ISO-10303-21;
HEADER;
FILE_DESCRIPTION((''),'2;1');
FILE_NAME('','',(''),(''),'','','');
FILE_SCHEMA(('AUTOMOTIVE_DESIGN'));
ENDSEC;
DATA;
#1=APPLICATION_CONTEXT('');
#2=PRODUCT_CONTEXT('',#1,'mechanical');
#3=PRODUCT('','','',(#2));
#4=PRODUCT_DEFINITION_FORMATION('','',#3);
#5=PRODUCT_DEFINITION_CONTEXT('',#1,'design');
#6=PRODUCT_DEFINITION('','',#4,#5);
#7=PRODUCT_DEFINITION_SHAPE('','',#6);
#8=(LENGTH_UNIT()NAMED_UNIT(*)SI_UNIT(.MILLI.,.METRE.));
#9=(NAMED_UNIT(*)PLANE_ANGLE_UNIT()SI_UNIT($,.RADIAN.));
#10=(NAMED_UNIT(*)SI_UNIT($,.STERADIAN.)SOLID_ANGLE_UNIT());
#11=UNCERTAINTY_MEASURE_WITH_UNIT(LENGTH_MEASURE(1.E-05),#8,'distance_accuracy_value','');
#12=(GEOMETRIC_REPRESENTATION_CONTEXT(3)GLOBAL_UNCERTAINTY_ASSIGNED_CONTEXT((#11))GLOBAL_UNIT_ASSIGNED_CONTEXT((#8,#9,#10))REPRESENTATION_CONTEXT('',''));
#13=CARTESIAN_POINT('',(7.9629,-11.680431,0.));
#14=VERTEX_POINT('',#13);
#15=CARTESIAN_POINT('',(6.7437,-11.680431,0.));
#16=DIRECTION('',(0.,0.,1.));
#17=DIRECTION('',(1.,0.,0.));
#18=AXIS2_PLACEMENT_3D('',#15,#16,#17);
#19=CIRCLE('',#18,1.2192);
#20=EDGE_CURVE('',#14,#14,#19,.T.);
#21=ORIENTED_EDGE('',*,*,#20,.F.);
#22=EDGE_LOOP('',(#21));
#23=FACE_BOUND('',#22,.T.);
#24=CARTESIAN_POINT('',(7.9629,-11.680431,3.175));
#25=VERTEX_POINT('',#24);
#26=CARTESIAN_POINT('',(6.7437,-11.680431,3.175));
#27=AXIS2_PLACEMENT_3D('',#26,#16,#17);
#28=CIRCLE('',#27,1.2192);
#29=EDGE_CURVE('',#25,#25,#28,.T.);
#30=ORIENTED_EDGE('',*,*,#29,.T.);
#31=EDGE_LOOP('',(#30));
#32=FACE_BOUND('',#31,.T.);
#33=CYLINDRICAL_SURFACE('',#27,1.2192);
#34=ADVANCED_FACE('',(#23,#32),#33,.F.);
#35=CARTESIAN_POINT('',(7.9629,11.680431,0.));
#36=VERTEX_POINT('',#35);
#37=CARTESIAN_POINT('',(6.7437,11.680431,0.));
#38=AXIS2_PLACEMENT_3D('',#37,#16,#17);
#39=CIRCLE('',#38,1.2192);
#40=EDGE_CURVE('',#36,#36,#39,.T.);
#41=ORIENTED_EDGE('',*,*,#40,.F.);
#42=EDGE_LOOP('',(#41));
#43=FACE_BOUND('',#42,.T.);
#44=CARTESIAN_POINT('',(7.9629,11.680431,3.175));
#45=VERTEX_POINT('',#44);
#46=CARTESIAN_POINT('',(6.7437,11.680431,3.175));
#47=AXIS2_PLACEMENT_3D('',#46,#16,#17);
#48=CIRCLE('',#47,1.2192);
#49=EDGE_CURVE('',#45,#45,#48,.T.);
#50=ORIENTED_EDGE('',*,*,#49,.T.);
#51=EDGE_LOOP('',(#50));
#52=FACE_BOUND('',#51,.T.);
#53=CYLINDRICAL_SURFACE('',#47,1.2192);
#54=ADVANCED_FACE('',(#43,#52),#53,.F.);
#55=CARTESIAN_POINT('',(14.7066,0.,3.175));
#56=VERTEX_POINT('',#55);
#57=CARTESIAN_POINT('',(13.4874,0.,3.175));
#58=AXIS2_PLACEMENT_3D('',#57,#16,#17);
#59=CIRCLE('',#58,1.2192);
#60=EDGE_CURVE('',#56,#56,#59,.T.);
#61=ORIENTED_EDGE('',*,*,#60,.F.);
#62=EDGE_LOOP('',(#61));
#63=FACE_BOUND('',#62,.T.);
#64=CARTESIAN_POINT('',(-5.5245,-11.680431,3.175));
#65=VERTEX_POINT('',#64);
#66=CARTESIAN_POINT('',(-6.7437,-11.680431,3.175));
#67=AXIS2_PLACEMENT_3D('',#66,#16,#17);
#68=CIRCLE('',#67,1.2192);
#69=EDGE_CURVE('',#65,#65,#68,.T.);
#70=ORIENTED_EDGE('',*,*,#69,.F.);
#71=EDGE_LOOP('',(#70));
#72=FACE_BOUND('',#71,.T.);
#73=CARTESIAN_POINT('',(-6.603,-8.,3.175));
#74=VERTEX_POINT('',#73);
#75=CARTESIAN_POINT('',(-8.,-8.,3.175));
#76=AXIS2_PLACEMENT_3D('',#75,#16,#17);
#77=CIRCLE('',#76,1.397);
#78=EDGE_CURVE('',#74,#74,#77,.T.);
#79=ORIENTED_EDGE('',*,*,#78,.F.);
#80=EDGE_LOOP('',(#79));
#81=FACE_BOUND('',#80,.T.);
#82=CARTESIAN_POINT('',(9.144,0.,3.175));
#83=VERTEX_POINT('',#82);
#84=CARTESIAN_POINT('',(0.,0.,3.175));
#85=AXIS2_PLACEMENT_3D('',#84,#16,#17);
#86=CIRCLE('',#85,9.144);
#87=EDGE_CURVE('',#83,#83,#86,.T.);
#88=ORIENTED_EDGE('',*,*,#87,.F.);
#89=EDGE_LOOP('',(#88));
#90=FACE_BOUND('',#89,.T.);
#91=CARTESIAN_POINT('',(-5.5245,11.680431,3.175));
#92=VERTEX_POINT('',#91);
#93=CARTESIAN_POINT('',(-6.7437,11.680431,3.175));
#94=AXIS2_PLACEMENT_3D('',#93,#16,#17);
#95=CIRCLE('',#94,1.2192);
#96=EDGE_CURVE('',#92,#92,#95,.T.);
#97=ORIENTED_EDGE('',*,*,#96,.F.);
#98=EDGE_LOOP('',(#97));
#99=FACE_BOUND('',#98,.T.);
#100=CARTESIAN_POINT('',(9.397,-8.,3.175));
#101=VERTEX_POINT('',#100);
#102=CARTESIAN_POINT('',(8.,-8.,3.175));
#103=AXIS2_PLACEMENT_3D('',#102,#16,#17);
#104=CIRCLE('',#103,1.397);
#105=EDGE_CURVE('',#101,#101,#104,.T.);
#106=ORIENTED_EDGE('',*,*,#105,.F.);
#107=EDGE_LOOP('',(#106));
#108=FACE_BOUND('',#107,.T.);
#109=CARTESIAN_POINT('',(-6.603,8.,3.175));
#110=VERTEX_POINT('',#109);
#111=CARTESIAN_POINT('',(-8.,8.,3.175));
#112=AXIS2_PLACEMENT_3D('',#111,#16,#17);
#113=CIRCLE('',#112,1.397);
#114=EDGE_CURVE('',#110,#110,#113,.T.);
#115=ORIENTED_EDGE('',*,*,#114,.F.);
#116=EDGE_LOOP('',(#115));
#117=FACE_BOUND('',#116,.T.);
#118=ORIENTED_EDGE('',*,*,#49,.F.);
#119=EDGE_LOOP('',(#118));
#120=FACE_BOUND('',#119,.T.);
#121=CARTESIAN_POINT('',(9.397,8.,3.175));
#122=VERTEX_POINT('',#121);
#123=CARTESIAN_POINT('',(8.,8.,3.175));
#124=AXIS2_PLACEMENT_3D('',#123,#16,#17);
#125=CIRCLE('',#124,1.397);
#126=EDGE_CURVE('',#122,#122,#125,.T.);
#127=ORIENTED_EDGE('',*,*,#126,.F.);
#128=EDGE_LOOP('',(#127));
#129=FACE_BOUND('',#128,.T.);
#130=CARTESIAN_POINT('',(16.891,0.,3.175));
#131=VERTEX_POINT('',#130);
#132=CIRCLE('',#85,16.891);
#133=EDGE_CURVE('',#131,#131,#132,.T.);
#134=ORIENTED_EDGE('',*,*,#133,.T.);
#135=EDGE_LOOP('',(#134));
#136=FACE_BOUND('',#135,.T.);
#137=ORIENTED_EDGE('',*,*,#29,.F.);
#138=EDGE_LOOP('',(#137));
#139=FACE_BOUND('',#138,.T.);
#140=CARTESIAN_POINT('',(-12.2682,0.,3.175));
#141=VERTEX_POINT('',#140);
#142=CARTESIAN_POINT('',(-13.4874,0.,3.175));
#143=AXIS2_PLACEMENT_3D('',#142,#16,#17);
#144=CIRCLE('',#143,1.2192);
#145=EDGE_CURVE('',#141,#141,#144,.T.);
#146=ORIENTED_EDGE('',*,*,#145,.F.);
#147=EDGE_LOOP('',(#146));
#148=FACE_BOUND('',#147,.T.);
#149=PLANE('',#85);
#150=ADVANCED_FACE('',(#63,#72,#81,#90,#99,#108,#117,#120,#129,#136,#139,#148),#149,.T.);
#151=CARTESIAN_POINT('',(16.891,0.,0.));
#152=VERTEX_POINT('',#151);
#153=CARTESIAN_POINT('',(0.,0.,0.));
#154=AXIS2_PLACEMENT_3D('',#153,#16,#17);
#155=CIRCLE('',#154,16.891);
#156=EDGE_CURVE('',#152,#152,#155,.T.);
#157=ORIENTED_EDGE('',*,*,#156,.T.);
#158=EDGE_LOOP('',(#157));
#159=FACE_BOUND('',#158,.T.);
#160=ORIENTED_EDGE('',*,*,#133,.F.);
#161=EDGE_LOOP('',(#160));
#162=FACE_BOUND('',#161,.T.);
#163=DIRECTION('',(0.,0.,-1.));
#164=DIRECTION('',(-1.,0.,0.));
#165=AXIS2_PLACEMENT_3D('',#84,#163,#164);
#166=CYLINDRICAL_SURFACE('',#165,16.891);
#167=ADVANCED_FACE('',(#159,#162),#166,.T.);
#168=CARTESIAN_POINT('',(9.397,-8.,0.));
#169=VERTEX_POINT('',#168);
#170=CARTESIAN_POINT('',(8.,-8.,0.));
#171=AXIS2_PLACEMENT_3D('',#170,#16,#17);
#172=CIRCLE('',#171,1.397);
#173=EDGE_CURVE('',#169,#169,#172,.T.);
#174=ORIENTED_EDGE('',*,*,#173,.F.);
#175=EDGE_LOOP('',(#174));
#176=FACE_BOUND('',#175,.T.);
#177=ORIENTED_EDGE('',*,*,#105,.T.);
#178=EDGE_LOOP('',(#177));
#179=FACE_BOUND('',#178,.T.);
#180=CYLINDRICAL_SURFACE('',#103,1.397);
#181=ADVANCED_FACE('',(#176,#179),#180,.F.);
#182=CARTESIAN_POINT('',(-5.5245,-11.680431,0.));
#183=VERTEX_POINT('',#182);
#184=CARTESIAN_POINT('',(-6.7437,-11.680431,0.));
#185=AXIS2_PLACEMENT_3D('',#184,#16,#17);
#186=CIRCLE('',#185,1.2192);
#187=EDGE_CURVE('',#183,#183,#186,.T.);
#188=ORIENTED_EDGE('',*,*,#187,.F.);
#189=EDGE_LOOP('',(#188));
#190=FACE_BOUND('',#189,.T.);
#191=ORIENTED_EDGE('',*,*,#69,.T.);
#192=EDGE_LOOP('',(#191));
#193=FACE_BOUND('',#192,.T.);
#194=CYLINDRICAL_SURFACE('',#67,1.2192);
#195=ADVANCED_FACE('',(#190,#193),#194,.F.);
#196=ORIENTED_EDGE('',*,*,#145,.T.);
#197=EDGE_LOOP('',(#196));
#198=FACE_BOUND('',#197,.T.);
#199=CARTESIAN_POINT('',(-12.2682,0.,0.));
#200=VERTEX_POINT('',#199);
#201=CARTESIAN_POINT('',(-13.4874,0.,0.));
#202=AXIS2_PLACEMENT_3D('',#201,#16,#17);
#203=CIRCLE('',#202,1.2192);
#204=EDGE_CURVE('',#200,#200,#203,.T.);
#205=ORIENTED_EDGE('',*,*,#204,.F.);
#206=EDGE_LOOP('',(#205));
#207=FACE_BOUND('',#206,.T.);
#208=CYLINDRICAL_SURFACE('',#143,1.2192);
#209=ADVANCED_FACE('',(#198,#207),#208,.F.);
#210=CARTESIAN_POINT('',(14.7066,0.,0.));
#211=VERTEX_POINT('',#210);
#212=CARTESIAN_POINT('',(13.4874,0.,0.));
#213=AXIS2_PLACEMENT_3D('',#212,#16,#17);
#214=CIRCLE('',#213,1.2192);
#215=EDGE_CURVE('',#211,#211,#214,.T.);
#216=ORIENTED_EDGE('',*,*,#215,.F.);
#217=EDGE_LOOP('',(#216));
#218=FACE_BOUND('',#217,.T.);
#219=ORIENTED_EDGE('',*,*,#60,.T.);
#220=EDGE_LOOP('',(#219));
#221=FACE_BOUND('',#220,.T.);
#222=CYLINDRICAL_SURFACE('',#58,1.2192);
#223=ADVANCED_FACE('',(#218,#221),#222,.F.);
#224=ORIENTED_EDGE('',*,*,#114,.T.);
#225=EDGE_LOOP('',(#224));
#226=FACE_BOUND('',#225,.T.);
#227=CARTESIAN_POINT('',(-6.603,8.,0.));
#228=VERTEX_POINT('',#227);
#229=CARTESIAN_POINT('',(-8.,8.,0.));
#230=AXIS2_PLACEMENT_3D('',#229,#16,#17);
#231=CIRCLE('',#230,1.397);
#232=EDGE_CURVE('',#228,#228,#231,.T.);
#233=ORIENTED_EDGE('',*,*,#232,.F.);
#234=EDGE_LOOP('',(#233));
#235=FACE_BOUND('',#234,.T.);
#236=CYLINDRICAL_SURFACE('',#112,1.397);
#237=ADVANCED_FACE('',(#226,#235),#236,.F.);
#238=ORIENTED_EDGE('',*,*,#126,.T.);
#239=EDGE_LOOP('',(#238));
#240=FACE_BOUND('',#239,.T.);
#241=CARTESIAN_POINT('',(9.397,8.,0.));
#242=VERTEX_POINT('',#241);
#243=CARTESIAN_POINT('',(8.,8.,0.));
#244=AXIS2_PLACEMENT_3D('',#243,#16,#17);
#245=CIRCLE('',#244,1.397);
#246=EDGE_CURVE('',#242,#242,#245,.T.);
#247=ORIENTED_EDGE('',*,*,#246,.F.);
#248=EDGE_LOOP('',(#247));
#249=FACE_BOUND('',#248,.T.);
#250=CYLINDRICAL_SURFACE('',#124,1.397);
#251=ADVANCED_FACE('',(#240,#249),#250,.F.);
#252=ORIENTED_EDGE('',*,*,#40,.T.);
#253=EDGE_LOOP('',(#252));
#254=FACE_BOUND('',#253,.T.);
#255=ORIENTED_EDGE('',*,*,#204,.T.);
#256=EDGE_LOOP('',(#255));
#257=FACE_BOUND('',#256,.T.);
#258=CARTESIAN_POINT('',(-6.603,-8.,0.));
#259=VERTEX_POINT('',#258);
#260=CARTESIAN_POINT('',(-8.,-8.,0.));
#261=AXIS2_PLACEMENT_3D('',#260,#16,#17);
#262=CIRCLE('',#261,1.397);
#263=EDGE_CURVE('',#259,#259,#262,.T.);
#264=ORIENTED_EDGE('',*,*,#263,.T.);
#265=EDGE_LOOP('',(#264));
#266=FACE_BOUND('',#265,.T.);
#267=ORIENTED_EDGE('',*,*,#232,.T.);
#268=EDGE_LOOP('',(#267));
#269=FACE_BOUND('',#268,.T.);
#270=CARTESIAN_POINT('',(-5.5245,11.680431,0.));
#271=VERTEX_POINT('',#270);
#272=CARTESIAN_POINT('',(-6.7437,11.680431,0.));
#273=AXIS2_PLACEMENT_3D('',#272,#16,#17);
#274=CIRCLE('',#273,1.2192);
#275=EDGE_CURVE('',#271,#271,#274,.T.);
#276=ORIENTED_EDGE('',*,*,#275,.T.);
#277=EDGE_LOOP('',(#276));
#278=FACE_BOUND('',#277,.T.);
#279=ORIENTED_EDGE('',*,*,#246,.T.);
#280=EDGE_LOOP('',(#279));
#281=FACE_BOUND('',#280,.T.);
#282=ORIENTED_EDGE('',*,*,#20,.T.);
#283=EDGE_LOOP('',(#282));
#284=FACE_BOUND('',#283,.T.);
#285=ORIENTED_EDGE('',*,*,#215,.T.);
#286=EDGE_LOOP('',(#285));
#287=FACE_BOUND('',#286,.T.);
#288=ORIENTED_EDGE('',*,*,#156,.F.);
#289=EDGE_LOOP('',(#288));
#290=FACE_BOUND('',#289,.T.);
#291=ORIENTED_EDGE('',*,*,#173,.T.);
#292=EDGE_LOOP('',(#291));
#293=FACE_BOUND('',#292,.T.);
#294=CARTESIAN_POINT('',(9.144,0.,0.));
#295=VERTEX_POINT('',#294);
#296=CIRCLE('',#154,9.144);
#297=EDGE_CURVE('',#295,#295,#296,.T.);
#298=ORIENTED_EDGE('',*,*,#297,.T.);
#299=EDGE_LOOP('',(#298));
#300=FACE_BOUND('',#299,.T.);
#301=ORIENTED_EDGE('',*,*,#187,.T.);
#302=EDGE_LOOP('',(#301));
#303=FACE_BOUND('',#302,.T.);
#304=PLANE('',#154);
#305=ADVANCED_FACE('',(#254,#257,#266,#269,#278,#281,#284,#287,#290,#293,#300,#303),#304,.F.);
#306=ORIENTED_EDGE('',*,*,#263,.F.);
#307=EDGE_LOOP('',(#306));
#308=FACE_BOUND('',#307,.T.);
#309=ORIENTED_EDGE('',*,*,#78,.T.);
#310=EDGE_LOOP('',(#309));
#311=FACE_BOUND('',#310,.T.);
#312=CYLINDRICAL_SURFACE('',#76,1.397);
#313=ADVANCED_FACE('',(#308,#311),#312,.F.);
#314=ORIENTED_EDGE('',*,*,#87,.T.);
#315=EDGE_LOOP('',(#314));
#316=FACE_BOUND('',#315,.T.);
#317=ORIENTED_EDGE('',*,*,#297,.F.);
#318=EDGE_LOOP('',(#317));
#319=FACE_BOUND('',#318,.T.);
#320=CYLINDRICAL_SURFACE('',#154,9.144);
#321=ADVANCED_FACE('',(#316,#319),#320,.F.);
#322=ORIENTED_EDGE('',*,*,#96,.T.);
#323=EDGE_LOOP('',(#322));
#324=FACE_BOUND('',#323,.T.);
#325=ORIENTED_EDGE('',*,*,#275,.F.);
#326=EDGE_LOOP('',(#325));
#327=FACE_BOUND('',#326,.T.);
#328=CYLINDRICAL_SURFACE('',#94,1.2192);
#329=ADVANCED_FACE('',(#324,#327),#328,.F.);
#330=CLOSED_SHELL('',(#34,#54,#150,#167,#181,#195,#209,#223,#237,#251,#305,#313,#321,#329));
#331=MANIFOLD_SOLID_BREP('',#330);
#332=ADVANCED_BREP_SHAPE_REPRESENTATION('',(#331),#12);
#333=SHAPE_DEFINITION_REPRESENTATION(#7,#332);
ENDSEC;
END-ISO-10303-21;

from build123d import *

# Parameters (mm, degrees)
SKETCH1_R                     = 16.891
BOSS_EXTRUDE1_DEPTH           = 3.175
F_2_CLEARANCE_HOLE1_D         = 2.4384
CIRPATTERN1_COUNT             = 6
F_3_CLEARANCE_HOLE1_OUTLINE_R = 1.397
F_3_CLEARANCE_HOLE1_DEPTH     = 3.175
SKETCH12_R                    = 9.144
CUT_EXTRUDE1_DEPTH            = 25.097559773


# Read off the part's stored shape, not the designer's step: #3 Clearance Hole1
with BuildPart() as part:
    # Sketch1 → Boss-Extrude1 (new body)
    with BuildSketch(Plane.XY):
        Circle(SKETCH1_R)
    extrude(amount=BOSS_EXTRUDE1_DEPTH)

    # #2 Clearance Hole1 (through all)
    with Locations(Plane.XY.offset(3.175)):
        with Locations((13.4874, 0)):
            f_2_clearance_hole1 = Hole(F_2_CLEARANCE_HOLE1_D / 2)

    # CirPattern1: #2 Clearance Hole1 ×6 about axis
    cirpattern1_axis = Axis((0, 0, 0), (0, 0, 1))
    for i in range(1, CIRPATTERN1_COUNT):
        add(f_2_clearance_hole1.rotate(cirpattern1_axis, i * 360 / CIRPATTERN1_COUNT), mode=Mode.SUBTRACT)

    # #3 Clearance Hole1 outline → #3 Clearance Hole1 (cut)
    with BuildSketch(Plane.XY):
        with Locations((-8, 8)):
            Circle(F_3_CLEARANCE_HOLE1_OUTLINE_R)
        with Locations((8, -8)):
            Circle(F_3_CLEARANCE_HOLE1_OUTLINE_R)
        with Locations((-8, -8)):
            Circle(F_3_CLEARANCE_HOLE1_OUTLINE_R)
        with Locations((8, 8)):
            Circle(F_3_CLEARANCE_HOLE1_OUTLINE_R)
    extrude(amount=F_3_CLEARANCE_HOLE1_DEPTH, mode=Mode.SUBTRACT)

    # Sketch12 → Cut-Extrude1 (cut, through all)
    with BuildSketch(Plane.XY.offset(3.175)):
        Circle(SKETCH12_R)
    extrude(amount=-CUT_EXTRUDE1_DEPTH, mode=Mode.SUBTRACT)


solid = part.part
